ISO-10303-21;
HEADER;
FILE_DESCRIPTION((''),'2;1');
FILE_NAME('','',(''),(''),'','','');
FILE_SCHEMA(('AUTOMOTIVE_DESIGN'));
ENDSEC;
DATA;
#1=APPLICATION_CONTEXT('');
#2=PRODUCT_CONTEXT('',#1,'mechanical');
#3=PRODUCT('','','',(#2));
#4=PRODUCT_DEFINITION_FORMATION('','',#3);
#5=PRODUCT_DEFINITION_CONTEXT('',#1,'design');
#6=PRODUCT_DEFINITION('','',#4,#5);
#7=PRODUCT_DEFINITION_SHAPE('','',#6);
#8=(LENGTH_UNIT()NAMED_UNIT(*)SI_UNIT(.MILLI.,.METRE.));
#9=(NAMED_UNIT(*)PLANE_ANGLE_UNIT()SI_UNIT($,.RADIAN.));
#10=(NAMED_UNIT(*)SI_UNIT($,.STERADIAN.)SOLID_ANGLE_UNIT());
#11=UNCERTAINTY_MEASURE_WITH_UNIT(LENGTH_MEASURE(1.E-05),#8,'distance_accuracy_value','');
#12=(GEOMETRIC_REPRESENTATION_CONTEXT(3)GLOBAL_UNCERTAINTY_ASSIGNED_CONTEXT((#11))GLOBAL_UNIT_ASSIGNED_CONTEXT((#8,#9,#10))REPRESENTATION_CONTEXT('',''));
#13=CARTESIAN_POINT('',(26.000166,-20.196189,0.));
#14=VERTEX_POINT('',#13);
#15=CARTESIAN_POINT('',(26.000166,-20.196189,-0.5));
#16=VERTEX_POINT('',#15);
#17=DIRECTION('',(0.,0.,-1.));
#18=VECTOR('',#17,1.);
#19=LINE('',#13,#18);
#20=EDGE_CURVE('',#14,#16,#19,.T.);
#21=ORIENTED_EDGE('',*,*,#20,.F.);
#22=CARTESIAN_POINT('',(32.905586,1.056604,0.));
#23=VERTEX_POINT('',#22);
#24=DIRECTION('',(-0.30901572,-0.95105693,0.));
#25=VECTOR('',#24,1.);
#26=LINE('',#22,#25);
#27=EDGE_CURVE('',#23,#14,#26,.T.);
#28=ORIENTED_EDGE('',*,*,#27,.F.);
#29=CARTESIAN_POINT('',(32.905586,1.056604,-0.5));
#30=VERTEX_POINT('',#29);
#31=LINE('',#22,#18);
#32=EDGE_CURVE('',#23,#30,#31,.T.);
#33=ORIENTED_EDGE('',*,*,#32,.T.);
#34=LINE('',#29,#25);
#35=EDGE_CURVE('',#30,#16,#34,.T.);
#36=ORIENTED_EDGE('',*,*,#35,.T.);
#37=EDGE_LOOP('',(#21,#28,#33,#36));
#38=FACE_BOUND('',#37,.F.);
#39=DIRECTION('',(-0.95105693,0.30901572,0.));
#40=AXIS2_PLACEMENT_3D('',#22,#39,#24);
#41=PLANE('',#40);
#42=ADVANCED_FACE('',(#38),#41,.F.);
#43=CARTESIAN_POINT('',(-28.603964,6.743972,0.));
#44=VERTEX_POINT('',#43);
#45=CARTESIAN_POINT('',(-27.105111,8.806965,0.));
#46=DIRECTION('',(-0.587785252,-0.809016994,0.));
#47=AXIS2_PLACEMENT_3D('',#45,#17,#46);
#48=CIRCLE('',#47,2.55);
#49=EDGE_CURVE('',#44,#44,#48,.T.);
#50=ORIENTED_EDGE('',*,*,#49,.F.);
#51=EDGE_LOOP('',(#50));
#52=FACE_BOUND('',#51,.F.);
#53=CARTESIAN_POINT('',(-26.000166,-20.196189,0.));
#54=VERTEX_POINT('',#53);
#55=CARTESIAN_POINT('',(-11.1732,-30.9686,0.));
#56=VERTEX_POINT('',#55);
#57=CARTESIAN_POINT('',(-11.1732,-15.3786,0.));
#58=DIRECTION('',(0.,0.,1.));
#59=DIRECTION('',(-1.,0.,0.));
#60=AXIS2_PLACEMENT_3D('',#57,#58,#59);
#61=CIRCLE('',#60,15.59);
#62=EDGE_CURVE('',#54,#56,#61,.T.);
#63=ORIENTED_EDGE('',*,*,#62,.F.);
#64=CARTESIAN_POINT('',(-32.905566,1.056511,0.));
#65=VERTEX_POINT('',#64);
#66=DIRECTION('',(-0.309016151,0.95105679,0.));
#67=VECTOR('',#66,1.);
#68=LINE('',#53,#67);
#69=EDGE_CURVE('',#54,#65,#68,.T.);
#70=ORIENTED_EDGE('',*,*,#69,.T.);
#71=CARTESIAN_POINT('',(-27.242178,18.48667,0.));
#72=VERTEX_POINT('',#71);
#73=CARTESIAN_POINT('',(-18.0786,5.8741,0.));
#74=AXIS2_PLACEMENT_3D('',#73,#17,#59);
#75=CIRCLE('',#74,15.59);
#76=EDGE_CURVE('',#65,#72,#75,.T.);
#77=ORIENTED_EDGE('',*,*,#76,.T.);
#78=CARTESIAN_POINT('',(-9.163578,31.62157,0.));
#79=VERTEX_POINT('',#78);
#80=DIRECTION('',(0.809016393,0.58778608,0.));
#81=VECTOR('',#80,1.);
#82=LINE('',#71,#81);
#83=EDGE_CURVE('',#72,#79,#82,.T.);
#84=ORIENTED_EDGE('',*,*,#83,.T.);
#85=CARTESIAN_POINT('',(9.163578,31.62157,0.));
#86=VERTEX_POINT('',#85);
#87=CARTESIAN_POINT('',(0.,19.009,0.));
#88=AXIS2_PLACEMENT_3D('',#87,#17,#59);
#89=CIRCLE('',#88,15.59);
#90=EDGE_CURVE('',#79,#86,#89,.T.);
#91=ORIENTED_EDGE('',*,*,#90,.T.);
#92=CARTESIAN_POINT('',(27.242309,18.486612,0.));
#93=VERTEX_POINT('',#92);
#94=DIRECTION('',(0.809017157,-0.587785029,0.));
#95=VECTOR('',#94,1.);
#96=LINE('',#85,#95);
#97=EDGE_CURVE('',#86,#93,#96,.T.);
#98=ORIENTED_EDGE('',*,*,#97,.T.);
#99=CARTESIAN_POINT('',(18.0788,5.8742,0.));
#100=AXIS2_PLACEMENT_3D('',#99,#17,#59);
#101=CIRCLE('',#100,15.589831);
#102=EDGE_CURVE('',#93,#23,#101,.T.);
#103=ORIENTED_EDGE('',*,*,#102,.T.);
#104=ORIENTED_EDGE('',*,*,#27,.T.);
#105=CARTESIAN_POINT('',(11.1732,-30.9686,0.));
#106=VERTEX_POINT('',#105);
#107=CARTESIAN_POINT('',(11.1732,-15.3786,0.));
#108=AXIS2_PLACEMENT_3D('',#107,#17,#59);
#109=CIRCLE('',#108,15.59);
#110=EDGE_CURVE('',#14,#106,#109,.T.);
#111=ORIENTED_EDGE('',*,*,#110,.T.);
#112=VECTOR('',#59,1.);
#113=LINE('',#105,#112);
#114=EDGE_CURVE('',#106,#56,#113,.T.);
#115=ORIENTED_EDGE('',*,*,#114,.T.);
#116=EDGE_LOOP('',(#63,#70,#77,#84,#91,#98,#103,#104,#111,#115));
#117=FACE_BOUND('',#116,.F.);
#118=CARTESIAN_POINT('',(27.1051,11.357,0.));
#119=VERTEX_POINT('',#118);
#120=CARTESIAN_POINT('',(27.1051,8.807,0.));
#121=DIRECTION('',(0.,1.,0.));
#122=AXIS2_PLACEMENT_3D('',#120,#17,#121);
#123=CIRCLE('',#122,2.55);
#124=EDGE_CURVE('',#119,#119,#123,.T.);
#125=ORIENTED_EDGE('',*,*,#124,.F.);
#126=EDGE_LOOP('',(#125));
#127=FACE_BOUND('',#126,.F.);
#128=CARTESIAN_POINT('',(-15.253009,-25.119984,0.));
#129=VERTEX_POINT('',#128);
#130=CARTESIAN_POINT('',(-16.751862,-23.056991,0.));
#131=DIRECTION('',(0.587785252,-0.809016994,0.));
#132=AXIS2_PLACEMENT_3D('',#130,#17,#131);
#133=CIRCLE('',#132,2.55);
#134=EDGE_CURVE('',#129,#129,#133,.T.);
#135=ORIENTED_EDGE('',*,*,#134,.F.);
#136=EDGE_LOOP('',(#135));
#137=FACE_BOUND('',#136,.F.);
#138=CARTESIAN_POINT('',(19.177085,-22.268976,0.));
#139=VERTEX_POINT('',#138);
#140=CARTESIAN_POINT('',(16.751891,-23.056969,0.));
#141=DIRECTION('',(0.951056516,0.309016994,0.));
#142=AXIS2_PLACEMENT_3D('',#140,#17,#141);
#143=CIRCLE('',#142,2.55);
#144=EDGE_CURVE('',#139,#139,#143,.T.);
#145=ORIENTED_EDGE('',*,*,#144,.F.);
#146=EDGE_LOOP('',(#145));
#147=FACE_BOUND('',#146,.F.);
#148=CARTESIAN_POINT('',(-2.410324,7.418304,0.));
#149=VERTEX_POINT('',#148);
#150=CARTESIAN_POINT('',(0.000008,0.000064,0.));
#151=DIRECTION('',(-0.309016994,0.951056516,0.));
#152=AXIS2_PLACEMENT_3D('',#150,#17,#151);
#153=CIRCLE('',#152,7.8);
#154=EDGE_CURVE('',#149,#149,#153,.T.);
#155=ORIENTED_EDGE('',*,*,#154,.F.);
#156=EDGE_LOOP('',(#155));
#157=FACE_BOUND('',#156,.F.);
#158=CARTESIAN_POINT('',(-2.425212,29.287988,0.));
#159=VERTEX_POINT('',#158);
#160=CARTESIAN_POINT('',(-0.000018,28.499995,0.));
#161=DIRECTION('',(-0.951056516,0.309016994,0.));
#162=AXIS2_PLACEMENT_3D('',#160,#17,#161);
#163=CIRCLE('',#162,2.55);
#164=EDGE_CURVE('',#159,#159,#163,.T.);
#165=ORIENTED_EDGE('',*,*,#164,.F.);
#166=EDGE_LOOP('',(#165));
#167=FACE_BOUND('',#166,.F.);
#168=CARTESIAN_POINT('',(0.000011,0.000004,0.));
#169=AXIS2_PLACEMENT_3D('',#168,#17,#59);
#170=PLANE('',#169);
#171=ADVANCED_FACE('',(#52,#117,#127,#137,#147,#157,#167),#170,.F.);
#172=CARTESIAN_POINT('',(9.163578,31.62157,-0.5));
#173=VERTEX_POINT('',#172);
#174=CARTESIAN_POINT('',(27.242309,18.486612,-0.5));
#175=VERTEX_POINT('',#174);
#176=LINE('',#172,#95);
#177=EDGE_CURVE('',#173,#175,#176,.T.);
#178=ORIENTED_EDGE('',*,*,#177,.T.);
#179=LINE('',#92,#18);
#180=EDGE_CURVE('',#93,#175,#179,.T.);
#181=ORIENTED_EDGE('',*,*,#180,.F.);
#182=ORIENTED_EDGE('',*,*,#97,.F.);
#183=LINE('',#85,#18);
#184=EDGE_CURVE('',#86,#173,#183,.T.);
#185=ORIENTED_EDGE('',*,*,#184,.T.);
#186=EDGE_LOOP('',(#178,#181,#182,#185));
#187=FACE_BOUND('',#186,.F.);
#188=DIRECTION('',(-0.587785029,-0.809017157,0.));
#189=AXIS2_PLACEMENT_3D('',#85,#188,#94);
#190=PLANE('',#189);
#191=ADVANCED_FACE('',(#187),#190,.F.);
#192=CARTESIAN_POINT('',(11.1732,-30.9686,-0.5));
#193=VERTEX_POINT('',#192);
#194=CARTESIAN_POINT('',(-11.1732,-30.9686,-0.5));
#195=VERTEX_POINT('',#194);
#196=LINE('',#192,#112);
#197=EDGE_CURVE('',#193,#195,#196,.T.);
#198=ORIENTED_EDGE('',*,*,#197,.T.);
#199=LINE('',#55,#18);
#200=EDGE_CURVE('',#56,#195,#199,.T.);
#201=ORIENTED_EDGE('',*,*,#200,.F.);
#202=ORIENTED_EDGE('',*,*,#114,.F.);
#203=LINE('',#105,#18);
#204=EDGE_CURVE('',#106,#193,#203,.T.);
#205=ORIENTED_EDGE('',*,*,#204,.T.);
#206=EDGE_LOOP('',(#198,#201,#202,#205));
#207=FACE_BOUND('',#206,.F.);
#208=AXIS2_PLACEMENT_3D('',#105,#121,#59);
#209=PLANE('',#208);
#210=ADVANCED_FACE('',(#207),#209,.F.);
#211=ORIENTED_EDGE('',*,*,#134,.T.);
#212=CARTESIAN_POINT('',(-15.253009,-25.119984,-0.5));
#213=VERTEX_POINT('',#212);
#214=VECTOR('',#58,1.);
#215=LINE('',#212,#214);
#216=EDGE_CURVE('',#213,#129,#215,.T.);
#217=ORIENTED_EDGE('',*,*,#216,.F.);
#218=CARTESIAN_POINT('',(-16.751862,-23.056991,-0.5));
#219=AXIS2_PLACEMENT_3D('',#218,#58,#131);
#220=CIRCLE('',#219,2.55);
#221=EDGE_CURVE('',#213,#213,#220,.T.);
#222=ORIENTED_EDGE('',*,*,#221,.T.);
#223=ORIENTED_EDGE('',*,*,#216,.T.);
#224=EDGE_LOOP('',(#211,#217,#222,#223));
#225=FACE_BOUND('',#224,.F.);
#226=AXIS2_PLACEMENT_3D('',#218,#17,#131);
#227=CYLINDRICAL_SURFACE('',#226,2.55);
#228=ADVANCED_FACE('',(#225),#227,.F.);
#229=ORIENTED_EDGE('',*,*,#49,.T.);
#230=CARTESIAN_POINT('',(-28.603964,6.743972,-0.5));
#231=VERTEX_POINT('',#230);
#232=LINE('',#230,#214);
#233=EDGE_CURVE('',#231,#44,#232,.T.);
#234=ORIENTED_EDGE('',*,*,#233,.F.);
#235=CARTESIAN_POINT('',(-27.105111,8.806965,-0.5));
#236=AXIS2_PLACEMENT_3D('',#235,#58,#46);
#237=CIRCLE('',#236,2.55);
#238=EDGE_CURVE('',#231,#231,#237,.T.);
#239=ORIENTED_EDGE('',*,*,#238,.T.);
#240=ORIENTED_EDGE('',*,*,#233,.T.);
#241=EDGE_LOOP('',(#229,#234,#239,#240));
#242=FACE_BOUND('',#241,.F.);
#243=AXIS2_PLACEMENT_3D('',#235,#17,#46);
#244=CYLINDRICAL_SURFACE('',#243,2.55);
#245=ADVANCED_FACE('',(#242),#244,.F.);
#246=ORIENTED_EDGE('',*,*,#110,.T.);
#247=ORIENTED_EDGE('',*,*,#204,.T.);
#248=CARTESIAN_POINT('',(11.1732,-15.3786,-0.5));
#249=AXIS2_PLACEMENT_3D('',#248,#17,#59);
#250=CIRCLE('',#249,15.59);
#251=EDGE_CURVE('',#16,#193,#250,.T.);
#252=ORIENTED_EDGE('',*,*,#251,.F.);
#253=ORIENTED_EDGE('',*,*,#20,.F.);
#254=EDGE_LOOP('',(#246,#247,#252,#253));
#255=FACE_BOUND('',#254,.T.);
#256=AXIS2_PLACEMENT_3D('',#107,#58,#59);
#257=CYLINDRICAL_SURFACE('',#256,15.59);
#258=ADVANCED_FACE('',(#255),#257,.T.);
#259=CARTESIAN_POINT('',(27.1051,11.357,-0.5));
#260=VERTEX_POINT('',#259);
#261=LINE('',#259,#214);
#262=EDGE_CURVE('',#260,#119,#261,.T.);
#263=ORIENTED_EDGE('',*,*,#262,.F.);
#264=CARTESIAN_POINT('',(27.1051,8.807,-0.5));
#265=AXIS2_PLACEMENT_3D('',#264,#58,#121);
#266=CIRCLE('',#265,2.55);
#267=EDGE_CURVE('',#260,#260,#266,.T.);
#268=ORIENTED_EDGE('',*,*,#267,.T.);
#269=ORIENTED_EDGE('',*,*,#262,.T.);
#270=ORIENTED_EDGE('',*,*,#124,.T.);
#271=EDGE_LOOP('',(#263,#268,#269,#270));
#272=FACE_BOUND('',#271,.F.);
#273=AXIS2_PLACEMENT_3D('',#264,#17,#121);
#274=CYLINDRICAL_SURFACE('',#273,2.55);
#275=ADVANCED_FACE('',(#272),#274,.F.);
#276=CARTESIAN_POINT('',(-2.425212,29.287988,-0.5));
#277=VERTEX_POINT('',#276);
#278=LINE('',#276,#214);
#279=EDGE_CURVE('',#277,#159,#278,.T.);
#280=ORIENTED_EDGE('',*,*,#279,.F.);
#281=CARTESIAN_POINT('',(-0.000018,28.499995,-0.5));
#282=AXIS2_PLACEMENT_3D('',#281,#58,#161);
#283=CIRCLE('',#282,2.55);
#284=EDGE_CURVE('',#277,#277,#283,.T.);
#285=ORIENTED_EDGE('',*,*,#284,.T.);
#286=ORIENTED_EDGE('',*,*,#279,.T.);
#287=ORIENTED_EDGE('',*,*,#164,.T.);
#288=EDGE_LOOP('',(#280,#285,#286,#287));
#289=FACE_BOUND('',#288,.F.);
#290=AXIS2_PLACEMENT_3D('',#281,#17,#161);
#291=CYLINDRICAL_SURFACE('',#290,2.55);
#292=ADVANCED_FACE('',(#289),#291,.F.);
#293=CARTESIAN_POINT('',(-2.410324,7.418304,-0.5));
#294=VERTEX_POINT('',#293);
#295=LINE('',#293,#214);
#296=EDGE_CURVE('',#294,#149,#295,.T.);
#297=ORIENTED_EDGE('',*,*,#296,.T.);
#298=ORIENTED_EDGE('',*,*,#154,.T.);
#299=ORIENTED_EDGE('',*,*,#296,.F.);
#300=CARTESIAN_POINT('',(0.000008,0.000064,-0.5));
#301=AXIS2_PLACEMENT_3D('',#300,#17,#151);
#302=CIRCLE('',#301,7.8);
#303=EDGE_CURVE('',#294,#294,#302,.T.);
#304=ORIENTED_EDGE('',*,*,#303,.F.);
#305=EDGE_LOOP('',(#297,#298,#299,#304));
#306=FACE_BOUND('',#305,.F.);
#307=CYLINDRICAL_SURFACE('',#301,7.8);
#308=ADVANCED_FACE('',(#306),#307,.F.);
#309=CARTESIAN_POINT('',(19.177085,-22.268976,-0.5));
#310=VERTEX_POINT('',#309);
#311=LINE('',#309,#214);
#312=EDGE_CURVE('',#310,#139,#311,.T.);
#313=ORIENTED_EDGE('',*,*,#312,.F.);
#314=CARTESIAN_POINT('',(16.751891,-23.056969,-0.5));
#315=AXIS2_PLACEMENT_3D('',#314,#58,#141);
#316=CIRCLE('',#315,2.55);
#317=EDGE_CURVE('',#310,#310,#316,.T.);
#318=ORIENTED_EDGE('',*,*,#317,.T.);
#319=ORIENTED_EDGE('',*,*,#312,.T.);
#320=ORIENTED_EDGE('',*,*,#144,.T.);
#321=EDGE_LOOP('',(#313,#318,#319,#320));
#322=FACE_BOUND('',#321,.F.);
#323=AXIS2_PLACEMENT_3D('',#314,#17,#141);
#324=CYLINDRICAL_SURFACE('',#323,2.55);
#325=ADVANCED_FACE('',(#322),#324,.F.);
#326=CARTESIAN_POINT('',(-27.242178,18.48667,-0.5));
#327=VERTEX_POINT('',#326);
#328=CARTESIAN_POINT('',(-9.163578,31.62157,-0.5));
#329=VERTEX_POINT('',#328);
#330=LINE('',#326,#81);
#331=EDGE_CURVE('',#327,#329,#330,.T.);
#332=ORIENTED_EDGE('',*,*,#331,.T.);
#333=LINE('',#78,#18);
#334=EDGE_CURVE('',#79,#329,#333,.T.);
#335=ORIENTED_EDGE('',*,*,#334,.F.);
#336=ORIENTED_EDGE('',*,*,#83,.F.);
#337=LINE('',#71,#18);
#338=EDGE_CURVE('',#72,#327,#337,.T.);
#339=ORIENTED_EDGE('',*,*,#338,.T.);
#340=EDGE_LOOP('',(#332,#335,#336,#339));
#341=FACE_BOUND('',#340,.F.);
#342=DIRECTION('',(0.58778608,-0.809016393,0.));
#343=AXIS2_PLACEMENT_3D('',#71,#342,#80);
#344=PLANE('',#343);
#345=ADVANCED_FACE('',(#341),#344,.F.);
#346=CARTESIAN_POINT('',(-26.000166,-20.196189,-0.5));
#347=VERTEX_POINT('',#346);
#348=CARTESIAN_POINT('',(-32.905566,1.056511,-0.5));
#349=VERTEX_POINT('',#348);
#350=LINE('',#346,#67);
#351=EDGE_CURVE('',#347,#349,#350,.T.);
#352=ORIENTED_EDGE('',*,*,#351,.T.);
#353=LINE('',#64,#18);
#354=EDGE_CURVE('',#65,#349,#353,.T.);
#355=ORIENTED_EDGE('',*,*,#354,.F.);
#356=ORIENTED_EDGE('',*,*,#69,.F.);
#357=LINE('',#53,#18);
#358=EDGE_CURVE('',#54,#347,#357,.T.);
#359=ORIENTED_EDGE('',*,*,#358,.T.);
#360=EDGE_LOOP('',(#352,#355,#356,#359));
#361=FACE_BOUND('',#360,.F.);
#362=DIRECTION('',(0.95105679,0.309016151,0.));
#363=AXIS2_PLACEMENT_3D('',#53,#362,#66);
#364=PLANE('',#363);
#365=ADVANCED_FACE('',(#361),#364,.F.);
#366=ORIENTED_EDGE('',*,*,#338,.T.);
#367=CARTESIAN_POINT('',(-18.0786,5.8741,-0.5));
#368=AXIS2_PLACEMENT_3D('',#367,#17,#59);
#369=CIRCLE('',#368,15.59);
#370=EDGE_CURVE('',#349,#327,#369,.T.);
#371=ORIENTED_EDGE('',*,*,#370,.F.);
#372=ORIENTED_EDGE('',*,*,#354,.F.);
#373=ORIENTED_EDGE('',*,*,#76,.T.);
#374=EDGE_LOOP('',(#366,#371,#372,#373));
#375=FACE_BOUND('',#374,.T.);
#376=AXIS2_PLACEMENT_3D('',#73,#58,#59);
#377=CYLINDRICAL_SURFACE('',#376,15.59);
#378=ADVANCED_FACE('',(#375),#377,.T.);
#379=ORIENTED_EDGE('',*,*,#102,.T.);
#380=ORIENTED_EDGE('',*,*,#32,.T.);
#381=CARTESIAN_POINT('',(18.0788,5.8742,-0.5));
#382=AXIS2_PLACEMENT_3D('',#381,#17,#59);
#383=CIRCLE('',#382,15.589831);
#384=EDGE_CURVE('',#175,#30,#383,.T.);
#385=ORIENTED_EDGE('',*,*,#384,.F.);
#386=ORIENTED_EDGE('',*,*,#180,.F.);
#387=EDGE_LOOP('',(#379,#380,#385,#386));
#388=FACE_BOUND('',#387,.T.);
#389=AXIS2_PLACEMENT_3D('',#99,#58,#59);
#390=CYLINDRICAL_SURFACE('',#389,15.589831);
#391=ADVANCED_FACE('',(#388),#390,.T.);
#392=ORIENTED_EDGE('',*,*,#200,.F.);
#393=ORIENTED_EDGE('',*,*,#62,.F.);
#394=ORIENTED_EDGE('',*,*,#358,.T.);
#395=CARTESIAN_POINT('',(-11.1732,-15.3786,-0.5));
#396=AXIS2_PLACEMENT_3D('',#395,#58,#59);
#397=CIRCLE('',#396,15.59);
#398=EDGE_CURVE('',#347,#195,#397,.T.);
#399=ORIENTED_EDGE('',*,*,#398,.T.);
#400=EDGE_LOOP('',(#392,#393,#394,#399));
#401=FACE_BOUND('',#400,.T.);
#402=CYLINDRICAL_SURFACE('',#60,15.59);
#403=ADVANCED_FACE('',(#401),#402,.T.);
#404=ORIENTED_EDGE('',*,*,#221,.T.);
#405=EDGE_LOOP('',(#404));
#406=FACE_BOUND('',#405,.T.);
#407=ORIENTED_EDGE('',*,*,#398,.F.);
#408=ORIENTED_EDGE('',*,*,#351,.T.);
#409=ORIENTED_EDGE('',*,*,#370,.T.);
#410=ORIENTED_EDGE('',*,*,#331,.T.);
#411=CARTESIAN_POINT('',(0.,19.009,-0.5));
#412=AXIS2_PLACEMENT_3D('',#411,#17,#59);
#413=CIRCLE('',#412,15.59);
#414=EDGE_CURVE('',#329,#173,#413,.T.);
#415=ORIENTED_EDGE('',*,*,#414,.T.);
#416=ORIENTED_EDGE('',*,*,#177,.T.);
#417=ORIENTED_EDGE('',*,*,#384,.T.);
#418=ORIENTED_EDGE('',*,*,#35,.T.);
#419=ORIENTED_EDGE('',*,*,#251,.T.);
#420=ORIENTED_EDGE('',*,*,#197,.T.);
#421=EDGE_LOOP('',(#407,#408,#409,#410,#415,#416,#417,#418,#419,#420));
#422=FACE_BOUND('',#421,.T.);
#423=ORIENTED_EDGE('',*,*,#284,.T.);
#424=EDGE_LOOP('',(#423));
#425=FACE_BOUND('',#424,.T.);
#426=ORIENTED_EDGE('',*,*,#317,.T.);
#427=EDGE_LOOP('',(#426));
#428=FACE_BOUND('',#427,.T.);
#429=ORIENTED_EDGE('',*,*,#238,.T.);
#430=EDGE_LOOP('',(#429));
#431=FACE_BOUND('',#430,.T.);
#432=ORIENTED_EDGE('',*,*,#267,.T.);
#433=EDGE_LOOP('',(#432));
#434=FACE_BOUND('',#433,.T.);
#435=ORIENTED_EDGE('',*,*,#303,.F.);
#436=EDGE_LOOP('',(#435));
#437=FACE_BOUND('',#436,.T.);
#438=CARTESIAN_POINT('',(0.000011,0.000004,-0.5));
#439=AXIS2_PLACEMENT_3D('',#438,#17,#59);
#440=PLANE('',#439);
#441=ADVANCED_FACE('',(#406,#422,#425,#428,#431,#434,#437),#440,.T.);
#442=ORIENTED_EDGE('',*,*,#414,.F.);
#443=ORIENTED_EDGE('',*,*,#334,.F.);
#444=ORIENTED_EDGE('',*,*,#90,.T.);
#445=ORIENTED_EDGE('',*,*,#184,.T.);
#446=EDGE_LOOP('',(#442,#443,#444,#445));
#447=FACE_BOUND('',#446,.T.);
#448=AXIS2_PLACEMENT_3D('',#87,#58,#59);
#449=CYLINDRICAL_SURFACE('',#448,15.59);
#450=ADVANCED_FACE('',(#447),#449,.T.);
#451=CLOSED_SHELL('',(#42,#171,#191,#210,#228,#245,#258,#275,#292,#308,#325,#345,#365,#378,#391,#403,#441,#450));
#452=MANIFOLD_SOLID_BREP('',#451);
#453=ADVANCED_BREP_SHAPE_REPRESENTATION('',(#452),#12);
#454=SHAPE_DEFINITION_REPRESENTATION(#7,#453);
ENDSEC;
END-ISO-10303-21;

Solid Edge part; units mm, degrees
sketch "Sketch1" plane through (0, 0, 0) normal (0, 0, -1) x (-1, 0, 0)
  line L0 (-9.1636, 31.6216) -> (-27.2423, 18.4866)
  arc A0 (-27.2423, 18.4866) -> (-32.9056, 1.0566) centre (-18.0788, 5.8742) ccw
  line L1 (-32.9056, 1.0566) -> (-26.0002, -20.1962)
  arc A1 (-26.0002, -20.1962) -> (-11.1732, -30.9686) centre (-11.1732, -15.3786) ccw
  line L2 (-11.1732, -30.9686) -> (11.1732, -30.9686)
  arc A2 (26.0002, -20.1962) -> (11.1732, -30.9686) centre (11.1732, -15.3786) cw
  line L3 (26.0002, -20.1962) -> (32.9056, 1.0565)
  arc A3 (32.9056, 1.0565) -> (27.2422, 18.4867) centre (18.0786, 5.8741) ccw
  line L4 (27.2422, 18.4867) -> (9.1636, 31.6216)
  arc A4 (9.1636, 31.6216) -> (-9.1636, 31.6216) centre (0, 19.009) ccw
extrude "Protrusion1" add sketch "Sketch1" along normal blind 0.5
hole "Furat_1" at (27.1051, 8.807, -0.5) direction (0, 0, 1) diameter 5.1 end through all
pattern_circular "MintaElőfordulás_1" count 5 over 360 about axis through (0, 0, -0.5) along (0, 0, 1) of "Furat_1"
sketch "Sketch2" plane through (0, 1.8152, -0.5) normal (0, 0, -1) x (-0.309017, 0.9510565, 0)
  circle A0 centre (-1.7263, -0.5609) radius 7.8
extrude "Kivágás_1" cut sketch "Sketch2" against normal blind 32.365
properties material "Szilikon"
